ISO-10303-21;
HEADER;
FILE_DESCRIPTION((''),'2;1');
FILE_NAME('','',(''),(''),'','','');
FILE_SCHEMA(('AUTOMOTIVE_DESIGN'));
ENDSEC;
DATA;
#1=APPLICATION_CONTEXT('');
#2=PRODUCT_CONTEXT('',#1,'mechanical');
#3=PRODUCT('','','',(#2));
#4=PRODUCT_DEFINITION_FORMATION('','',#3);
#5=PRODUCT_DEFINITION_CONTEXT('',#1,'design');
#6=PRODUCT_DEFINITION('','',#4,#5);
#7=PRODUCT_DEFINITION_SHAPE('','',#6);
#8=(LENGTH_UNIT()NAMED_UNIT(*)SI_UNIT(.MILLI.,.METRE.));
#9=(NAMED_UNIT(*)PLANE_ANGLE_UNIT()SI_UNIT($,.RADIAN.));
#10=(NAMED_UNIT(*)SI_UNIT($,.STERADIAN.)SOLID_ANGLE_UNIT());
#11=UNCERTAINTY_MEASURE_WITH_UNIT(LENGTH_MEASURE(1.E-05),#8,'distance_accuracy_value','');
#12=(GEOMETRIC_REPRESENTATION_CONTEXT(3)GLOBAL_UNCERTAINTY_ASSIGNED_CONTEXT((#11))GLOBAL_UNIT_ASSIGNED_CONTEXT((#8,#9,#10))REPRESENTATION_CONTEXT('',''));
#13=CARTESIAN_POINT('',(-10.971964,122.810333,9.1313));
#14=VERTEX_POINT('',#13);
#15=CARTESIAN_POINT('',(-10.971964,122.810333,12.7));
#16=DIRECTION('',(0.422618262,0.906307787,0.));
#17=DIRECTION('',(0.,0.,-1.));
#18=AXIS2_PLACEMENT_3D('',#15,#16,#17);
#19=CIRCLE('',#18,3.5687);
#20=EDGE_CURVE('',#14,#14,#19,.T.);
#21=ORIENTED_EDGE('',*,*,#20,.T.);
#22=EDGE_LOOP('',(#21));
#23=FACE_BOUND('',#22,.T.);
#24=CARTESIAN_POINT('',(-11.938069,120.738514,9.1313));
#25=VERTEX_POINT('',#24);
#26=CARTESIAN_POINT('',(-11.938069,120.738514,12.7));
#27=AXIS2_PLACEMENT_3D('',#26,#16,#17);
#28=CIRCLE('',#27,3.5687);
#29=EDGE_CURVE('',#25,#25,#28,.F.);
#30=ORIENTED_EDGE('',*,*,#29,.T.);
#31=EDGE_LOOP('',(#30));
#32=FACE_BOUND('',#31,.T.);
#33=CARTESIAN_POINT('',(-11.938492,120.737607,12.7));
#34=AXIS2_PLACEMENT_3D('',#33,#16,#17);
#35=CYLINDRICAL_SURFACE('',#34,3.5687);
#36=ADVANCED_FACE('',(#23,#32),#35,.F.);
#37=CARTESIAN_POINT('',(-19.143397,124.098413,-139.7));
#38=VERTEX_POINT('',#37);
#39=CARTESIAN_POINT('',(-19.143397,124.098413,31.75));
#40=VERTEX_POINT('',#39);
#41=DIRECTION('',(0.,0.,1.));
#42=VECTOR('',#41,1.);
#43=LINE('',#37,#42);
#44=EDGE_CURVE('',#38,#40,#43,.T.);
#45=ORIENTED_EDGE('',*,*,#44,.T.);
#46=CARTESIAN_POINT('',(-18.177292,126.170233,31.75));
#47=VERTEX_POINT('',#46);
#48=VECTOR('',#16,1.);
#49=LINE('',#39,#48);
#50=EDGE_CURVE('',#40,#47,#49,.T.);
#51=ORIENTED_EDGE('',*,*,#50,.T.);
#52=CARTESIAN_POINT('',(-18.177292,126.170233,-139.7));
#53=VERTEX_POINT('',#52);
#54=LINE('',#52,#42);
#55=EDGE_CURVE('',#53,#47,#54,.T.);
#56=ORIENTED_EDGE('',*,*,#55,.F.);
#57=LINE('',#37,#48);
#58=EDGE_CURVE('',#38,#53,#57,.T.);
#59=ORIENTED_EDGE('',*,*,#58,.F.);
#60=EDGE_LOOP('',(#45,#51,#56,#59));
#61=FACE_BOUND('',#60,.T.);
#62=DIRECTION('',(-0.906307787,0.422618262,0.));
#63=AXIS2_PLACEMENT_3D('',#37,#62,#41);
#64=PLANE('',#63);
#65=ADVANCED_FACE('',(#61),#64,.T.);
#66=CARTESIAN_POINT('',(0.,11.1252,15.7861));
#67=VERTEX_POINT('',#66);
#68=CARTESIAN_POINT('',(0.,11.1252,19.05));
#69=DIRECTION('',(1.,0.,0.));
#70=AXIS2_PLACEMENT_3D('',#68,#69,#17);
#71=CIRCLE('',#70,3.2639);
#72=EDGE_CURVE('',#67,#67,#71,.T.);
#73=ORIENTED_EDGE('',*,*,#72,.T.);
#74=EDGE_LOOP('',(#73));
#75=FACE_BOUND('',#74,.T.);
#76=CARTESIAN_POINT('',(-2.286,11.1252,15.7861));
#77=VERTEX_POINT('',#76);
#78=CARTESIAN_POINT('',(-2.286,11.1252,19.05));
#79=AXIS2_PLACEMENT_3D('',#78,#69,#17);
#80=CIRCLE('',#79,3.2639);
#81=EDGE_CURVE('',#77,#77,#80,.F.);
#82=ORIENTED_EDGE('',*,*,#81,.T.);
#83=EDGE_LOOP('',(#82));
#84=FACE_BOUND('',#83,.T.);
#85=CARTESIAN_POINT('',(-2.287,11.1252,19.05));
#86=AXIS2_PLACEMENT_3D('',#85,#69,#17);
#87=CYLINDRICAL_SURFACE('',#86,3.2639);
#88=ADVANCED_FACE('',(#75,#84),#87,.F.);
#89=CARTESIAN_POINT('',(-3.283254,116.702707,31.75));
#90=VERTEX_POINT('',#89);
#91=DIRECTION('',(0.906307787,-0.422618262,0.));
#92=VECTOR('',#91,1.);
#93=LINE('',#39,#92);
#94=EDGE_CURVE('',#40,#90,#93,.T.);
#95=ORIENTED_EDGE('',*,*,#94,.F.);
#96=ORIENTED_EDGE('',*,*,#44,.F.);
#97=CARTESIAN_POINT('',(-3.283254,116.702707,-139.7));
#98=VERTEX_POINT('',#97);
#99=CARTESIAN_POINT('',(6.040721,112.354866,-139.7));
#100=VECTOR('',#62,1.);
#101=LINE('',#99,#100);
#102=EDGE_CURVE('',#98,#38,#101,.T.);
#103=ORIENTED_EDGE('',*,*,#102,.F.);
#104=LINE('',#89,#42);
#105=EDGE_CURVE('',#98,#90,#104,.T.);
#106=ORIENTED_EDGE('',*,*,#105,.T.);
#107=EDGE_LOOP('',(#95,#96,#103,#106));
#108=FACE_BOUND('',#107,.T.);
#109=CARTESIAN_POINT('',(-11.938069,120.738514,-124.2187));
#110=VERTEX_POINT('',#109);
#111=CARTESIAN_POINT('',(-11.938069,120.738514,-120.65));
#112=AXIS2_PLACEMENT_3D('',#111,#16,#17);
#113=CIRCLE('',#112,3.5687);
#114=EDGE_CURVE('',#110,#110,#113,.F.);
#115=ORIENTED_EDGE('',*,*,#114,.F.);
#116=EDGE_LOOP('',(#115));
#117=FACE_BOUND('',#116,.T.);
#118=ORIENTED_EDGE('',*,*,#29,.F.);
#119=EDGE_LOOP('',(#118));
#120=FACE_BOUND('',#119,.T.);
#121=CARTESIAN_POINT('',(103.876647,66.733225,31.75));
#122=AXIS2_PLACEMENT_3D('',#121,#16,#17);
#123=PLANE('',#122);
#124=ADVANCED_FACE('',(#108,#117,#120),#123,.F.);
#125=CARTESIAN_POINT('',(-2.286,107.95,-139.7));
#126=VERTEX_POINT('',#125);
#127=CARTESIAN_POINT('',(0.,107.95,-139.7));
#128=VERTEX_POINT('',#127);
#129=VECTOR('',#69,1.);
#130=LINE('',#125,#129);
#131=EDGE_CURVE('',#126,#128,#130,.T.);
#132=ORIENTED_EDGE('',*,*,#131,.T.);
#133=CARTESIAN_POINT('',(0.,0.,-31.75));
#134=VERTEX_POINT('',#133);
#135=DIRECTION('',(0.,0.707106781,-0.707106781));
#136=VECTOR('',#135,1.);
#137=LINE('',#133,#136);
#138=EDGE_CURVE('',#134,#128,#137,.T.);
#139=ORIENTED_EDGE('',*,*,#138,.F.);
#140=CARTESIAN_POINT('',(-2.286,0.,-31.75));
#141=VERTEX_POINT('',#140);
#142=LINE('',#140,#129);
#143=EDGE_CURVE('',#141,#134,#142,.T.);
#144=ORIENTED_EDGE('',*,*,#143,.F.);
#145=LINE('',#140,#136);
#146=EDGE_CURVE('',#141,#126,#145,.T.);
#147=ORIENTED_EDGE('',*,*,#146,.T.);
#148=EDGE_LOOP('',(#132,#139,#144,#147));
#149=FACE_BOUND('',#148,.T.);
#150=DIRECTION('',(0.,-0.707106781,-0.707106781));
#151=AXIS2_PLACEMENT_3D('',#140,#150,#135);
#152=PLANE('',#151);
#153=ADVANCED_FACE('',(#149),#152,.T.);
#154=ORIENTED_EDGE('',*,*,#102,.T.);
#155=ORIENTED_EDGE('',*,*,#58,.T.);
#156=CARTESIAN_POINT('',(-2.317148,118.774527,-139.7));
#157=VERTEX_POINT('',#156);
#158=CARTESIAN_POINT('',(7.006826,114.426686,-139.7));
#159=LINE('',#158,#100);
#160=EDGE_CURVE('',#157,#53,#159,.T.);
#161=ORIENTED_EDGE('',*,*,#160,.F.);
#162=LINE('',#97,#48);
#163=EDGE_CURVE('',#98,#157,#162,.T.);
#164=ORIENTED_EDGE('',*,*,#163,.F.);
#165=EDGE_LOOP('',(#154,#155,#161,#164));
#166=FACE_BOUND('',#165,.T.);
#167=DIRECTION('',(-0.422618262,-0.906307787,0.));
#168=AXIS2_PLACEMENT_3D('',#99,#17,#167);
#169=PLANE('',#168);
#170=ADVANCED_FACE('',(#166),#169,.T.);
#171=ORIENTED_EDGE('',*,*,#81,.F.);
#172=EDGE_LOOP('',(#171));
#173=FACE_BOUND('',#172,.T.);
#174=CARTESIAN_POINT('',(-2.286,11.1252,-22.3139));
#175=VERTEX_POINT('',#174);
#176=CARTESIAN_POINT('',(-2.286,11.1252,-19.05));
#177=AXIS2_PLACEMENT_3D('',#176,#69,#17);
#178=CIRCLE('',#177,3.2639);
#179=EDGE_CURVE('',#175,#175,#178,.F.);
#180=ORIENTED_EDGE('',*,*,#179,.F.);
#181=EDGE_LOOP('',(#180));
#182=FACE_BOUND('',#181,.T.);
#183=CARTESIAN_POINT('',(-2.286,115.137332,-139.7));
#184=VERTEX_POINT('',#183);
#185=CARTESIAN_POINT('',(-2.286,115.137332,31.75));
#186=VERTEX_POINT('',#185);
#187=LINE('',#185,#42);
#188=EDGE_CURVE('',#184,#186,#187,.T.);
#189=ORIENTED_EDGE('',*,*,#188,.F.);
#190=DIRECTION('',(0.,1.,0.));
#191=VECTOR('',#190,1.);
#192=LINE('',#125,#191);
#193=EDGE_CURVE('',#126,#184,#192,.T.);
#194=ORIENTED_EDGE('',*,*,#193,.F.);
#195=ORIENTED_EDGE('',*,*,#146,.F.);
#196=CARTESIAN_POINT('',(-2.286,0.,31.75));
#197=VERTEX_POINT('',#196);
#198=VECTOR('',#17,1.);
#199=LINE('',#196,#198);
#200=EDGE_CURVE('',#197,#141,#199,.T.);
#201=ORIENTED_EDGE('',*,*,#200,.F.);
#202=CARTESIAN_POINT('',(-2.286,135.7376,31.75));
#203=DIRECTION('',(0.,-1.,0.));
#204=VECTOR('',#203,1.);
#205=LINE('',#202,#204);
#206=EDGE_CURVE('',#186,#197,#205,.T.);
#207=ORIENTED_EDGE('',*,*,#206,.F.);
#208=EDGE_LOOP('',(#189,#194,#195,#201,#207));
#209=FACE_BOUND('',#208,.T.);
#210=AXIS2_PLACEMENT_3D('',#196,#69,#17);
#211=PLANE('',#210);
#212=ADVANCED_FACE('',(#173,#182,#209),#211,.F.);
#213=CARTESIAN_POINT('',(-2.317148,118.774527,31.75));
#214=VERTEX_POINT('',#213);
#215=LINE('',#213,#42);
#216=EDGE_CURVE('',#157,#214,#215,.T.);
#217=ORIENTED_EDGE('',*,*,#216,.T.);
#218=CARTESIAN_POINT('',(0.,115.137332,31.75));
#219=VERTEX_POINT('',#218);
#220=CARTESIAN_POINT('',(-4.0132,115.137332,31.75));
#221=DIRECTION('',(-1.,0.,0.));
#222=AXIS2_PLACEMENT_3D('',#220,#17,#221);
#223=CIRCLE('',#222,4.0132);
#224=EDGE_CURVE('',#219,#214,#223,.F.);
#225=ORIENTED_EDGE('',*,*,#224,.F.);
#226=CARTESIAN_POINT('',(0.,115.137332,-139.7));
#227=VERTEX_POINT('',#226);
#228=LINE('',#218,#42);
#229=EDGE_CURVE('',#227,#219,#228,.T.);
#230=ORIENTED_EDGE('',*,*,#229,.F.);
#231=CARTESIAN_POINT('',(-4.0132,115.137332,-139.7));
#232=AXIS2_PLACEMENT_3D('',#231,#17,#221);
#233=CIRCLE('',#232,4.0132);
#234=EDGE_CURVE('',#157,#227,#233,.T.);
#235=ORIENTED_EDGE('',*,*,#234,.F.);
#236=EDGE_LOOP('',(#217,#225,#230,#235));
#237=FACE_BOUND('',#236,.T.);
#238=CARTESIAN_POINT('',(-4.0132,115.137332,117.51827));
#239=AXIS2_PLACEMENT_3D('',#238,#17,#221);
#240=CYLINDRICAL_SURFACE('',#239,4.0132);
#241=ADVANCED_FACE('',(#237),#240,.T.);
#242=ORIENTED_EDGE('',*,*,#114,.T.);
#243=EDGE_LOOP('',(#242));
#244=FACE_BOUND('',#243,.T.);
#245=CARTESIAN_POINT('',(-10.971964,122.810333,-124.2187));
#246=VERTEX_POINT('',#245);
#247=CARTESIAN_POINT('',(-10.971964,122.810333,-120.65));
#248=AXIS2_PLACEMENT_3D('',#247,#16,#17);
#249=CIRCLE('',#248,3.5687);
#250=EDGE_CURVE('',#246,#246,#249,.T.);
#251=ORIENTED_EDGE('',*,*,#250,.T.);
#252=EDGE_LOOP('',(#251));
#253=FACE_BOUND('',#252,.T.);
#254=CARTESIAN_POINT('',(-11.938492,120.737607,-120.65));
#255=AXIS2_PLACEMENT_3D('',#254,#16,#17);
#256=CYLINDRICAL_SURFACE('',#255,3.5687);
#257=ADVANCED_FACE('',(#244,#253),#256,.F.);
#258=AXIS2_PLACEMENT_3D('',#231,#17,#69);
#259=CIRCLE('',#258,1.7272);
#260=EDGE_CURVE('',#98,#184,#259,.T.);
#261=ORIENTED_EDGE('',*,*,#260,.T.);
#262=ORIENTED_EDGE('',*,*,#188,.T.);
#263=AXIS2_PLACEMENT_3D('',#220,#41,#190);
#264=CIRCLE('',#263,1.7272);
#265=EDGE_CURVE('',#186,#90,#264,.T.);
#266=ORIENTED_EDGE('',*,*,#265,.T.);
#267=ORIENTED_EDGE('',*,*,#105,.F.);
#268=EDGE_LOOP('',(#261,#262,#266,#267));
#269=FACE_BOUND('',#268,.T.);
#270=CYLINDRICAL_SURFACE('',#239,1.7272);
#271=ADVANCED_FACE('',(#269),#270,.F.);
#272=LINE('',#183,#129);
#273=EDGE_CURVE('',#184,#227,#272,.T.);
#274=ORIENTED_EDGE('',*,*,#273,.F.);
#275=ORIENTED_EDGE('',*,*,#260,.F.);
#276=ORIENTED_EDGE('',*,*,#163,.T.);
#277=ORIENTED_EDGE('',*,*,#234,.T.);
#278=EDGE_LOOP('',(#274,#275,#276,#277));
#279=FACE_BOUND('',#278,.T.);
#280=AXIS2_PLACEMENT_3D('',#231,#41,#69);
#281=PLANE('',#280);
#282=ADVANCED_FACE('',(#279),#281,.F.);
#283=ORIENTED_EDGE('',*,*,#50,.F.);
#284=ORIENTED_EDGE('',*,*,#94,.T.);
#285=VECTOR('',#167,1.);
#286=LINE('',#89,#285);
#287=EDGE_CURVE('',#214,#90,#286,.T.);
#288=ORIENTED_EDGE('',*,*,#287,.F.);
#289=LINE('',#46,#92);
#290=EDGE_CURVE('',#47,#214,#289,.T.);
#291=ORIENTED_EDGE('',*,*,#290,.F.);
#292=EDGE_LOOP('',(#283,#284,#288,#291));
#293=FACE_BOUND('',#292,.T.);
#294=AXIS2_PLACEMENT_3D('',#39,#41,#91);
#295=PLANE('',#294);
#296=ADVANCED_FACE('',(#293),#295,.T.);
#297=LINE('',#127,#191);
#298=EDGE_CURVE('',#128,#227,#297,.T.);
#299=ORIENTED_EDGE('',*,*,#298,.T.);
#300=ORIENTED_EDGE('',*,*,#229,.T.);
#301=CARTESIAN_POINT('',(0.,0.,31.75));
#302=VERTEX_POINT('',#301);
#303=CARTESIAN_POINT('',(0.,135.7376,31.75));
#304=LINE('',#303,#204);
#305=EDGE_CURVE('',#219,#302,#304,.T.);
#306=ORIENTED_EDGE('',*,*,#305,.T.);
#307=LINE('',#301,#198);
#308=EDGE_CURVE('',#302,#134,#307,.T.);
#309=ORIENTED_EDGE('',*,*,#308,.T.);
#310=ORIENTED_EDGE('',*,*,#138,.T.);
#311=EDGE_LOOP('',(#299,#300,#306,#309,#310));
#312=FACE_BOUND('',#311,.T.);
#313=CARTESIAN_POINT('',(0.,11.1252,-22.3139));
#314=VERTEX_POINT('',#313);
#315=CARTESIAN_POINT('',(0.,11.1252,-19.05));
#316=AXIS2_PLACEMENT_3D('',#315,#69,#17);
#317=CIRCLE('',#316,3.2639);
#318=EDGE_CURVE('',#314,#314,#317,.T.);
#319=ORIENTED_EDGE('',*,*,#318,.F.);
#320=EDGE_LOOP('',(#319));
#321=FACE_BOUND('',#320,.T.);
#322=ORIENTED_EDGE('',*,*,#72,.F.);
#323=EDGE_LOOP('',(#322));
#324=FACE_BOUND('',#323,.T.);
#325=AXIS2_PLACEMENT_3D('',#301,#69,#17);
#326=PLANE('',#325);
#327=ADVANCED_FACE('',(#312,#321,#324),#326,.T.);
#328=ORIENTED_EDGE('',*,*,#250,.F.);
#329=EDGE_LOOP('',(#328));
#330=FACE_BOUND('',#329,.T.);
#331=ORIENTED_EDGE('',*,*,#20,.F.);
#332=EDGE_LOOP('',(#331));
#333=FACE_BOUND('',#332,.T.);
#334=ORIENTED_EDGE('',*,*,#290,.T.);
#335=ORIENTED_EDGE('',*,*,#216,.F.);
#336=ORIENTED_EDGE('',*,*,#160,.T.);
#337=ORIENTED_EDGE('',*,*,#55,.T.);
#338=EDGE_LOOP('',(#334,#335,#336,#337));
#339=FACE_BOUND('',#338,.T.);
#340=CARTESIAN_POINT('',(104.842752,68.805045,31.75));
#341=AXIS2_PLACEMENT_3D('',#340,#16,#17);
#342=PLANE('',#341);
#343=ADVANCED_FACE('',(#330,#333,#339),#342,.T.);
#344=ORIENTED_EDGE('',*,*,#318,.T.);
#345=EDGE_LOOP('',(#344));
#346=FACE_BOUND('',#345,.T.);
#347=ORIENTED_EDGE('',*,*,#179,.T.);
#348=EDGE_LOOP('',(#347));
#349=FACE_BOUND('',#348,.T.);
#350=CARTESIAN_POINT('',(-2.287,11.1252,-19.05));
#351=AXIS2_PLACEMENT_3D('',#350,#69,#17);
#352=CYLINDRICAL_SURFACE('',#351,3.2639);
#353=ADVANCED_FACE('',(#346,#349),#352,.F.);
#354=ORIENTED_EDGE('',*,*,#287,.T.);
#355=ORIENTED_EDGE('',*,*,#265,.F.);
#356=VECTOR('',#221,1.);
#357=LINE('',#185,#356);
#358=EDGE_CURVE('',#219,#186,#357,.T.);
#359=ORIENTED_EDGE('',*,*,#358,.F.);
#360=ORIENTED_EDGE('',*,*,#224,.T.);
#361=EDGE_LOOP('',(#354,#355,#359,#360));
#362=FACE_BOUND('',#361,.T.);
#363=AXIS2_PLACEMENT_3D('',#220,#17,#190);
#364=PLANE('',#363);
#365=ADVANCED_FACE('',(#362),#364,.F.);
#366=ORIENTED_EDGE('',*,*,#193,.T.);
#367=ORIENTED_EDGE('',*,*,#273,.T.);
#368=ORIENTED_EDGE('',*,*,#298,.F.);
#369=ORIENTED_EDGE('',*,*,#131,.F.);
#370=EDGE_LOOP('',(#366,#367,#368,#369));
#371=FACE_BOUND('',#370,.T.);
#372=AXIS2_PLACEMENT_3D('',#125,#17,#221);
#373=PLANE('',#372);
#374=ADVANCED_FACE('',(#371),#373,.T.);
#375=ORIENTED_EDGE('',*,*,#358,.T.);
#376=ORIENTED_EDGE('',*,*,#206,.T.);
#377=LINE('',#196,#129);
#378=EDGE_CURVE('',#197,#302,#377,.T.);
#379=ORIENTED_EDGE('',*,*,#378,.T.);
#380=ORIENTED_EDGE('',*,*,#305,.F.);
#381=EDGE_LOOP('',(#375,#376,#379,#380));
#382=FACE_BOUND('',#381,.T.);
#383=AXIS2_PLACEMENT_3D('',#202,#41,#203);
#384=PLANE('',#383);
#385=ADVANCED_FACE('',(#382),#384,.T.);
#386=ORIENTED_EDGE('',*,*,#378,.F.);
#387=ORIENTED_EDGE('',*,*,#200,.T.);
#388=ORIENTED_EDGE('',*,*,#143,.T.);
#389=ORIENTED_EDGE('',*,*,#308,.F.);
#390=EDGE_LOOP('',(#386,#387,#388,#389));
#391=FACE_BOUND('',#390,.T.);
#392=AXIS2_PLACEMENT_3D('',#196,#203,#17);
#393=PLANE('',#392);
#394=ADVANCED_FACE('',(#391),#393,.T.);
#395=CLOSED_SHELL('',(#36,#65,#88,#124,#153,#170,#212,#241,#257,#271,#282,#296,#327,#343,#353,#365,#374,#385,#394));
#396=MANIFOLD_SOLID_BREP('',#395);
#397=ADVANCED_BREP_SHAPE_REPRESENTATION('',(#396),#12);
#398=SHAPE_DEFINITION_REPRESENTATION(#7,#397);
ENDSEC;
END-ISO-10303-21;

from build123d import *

# Parameters (mm, degrees)
BASE_FLANGE1_DEPTH         = 2.286
CUT_EXTRUDE1_REACH         = 196.797
SKETCH4_R                  = 3.2639
SKETCH4_R_2                = 3.5687
SKETCHED_START             = 119.049056405
SKETCHED_BEND2_OUTLINE_R   = 3.5687
SKETCHED_BEND2_DEPTH       = 4.950943595
SKETCHED_START_2           = -139.7
SKETCHED_BEND2_2_DEPTH     = 171.45
SKETCHED_BEND2_3_DEPTH     = 171.45
SKETCHED_START_3           = 104.381009176
SKETCHED_BEND2_4_OUTLINE_R = 3.5687
SKETCHED_BEND2_4_DEPTH     = 2.286


with BuildPart() as part:
    # Base-Flange1: sheet metal written as solids
    # Sketch2 → Base-Flange1 (new body)
    with BuildSketch(Plane(origin=(0, 0, 0), x_dir=(0, 0, -1), z_dir=(1, 0, 0))):
        Polygon((-31.75, 0), (31.75, 0), (139.7, 107.95), (139.7, 135.7376), (-31.75, 135.7376), align=None)
    extrude(amount=-BASE_FLANGE1_DEPTH)

    # Sketch4 → Cut-Extrude1 (cut, up to next)
    with BuildSketch(Plane(origin=(0, 0, 0), x_dir=(0, 0, -1), z_dir=(1, 0, 0)), mode=Mode.PRIVATE) as cut_extrude1_sk1:
        with Locations((19.05, 11.1252)):
            Circle(SKETCH4_R)
    cut_extrude1_tool1 = extrude(cut_extrude1_sk1.sketch, amount=-CUT_EXTRUDE1_REACH, mode=Mode.PRIVATE) & part.part
    # Sketch4 → Cut-Extrude1 (cut, up to next)
    with BuildSketch(Plane(origin=(0, 0, 0), x_dir=(0, 0, -1), z_dir=(1, 0, 0)), mode=Mode.PRIVATE) as cut_extrude1_sk2:
        with Locations((-19.05, 11.1252)):
            Circle(SKETCH4_R)
    cut_extrude1_tool2 = extrude(cut_extrude1_sk2.sketch, amount=-CUT_EXTRUDE1_REACH, mode=Mode.PRIVATE) & part.part
    # Sketch4 → Cut-Extrude1 (cut, up to next)
    with BuildSketch(Plane(origin=(0, 0, 0), x_dir=(0, 0, -1), z_dir=(1, 0, 0)), mode=Mode.PRIVATE) as cut_extrude1_sk3:
        with Locations((-12.7, 127.7874)):
            Circle(SKETCH4_R_2)
    cut_extrude1_tool3 = extrude(cut_extrude1_sk3.sketch, amount=-CUT_EXTRUDE1_REACH, mode=Mode.PRIVATE) & part.part
    # Sketch4 → Cut-Extrude1 (cut, up to next)
    with BuildSketch(Plane(origin=(0, 0, 0), x_dir=(0, 0, -1), z_dir=(1, 0, 0)), mode=Mode.PRIVATE) as cut_extrude1_sk4:
        with Locations((120.65, 127.7874)):
            Circle(SKETCH4_R_2)
    cut_extrude1_tool4 = extrude(cut_extrude1_sk4.sketch, amount=-CUT_EXTRUDE1_REACH, mode=Mode.PRIVATE) & part.part
    add(cut_extrude1_tool1.solids().sort_by_distance((0, 11.1252, -19.05))[0], mode=Mode.SUBTRACT)
    add(cut_extrude1_tool2.solids().sort_by_distance((0, 11.1252, 19.05))[0], mode=Mode.SUBTRACT)
    add(cut_extrude1_tool3.solids().sort_by_distance((0, 127.7874, 12.7))[0], mode=Mode.SUBTRACT)
    add(cut_extrude1_tool4.solids().sort_by_distance((0, 127.7874, -120.65))[0], mode=Mode.SUBTRACT)

    # Sketched Bend2: read off the stored shape, not the designer's step
    # Sketched Bend2 outline → Sketched Bend2 (cut)
    with BuildSketch(Plane(origin=(0, 0, 0), x_dir=(0.906307787036651, -0.42261826174069705, 0), z_dir=(0.42261826174069705, 0.9063077870366512, 0)).offset(SKETCHED_START)):
        with Locations((-61.845865858, -12.7)):
            Circle(SKETCHED_BEND2_OUTLINE_R)
        with Locations((-61.845865858, 120.65)):
            Circle(SKETCHED_BEND2_OUTLINE_R)
    extrude(amount=SKETCHED_BEND2_DEPTH, mode=Mode.SUBTRACT)

    # Sketched Bend2 2 outline → Sketched Bend2 2 (cut)
    with BuildSketch(Plane.XY.offset(SKETCHED_START_2)):
        with BuildLine():
            Line((-2.286, 135.7376), (-2.286, 118.759838882))
            ThreePointArc((-2.286, 118.759838882), (-0.619280932, 117.279080961), (0, 115.137332236))
            Line((0, 115.137332236), (0, 135.7376))
            Line((0, 135.7376), (-2.286, 135.7376))
        make_face()
    extrude(amount=SKETCHED_BEND2_2_DEPTH, mode=Mode.SUBTRACT)

    # Sketched Bend2 3 outline → Sketched Bend2 3 (add)
    with BuildSketch(Plane.XY.offset(SKETCHED_START_2)):
        with BuildLine():
            Line((-19.143397335, 124.098413464), (-3.283253738, 116.702707046))
            ThreePointArc((-3.283253738, 116.702707046), (-2.556494295, 116.065356119), (-2.286, 115.137332236))
            Line((-2.286, 115.137332236), (-2.286, 118.759838882))
            ThreePointArc((-2.286, 118.759838882), (-2.301558441, 118.767216176), (-2.317148392, 118.774526647))
            Line((-2.317148392, 118.774526647), (-18.177291988, 126.170233065))
            Line((-18.177291988, 126.170233065), (-19.143397335, 124.098413464))
        make_face()
    extrude(amount=SKETCHED_BEND2_3_DEPTH)

    # Sketched Bend2 4 outline → Sketched Bend2 4 (cut)
    with BuildSketch(Plane(origin=(0, 0, 0), x_dir=(0.906307787036651, -0.42261826174069705, 0), z_dir=(0.42261826174069705, 0.9063077870366512, 0)).offset(SKETCHED_START_3)):
        with Locations((-61.845865858, -12.7)):
            Circle(SKETCHED_BEND2_4_OUTLINE_R)
        with Locations((-61.845865858, 120.65)):
            Circle(SKETCHED_BEND2_4_OUTLINE_R)
    extrude(amount=SKETCHED_BEND2_4_DEPTH, mode=Mode.SUBTRACT)


solid = part.part
